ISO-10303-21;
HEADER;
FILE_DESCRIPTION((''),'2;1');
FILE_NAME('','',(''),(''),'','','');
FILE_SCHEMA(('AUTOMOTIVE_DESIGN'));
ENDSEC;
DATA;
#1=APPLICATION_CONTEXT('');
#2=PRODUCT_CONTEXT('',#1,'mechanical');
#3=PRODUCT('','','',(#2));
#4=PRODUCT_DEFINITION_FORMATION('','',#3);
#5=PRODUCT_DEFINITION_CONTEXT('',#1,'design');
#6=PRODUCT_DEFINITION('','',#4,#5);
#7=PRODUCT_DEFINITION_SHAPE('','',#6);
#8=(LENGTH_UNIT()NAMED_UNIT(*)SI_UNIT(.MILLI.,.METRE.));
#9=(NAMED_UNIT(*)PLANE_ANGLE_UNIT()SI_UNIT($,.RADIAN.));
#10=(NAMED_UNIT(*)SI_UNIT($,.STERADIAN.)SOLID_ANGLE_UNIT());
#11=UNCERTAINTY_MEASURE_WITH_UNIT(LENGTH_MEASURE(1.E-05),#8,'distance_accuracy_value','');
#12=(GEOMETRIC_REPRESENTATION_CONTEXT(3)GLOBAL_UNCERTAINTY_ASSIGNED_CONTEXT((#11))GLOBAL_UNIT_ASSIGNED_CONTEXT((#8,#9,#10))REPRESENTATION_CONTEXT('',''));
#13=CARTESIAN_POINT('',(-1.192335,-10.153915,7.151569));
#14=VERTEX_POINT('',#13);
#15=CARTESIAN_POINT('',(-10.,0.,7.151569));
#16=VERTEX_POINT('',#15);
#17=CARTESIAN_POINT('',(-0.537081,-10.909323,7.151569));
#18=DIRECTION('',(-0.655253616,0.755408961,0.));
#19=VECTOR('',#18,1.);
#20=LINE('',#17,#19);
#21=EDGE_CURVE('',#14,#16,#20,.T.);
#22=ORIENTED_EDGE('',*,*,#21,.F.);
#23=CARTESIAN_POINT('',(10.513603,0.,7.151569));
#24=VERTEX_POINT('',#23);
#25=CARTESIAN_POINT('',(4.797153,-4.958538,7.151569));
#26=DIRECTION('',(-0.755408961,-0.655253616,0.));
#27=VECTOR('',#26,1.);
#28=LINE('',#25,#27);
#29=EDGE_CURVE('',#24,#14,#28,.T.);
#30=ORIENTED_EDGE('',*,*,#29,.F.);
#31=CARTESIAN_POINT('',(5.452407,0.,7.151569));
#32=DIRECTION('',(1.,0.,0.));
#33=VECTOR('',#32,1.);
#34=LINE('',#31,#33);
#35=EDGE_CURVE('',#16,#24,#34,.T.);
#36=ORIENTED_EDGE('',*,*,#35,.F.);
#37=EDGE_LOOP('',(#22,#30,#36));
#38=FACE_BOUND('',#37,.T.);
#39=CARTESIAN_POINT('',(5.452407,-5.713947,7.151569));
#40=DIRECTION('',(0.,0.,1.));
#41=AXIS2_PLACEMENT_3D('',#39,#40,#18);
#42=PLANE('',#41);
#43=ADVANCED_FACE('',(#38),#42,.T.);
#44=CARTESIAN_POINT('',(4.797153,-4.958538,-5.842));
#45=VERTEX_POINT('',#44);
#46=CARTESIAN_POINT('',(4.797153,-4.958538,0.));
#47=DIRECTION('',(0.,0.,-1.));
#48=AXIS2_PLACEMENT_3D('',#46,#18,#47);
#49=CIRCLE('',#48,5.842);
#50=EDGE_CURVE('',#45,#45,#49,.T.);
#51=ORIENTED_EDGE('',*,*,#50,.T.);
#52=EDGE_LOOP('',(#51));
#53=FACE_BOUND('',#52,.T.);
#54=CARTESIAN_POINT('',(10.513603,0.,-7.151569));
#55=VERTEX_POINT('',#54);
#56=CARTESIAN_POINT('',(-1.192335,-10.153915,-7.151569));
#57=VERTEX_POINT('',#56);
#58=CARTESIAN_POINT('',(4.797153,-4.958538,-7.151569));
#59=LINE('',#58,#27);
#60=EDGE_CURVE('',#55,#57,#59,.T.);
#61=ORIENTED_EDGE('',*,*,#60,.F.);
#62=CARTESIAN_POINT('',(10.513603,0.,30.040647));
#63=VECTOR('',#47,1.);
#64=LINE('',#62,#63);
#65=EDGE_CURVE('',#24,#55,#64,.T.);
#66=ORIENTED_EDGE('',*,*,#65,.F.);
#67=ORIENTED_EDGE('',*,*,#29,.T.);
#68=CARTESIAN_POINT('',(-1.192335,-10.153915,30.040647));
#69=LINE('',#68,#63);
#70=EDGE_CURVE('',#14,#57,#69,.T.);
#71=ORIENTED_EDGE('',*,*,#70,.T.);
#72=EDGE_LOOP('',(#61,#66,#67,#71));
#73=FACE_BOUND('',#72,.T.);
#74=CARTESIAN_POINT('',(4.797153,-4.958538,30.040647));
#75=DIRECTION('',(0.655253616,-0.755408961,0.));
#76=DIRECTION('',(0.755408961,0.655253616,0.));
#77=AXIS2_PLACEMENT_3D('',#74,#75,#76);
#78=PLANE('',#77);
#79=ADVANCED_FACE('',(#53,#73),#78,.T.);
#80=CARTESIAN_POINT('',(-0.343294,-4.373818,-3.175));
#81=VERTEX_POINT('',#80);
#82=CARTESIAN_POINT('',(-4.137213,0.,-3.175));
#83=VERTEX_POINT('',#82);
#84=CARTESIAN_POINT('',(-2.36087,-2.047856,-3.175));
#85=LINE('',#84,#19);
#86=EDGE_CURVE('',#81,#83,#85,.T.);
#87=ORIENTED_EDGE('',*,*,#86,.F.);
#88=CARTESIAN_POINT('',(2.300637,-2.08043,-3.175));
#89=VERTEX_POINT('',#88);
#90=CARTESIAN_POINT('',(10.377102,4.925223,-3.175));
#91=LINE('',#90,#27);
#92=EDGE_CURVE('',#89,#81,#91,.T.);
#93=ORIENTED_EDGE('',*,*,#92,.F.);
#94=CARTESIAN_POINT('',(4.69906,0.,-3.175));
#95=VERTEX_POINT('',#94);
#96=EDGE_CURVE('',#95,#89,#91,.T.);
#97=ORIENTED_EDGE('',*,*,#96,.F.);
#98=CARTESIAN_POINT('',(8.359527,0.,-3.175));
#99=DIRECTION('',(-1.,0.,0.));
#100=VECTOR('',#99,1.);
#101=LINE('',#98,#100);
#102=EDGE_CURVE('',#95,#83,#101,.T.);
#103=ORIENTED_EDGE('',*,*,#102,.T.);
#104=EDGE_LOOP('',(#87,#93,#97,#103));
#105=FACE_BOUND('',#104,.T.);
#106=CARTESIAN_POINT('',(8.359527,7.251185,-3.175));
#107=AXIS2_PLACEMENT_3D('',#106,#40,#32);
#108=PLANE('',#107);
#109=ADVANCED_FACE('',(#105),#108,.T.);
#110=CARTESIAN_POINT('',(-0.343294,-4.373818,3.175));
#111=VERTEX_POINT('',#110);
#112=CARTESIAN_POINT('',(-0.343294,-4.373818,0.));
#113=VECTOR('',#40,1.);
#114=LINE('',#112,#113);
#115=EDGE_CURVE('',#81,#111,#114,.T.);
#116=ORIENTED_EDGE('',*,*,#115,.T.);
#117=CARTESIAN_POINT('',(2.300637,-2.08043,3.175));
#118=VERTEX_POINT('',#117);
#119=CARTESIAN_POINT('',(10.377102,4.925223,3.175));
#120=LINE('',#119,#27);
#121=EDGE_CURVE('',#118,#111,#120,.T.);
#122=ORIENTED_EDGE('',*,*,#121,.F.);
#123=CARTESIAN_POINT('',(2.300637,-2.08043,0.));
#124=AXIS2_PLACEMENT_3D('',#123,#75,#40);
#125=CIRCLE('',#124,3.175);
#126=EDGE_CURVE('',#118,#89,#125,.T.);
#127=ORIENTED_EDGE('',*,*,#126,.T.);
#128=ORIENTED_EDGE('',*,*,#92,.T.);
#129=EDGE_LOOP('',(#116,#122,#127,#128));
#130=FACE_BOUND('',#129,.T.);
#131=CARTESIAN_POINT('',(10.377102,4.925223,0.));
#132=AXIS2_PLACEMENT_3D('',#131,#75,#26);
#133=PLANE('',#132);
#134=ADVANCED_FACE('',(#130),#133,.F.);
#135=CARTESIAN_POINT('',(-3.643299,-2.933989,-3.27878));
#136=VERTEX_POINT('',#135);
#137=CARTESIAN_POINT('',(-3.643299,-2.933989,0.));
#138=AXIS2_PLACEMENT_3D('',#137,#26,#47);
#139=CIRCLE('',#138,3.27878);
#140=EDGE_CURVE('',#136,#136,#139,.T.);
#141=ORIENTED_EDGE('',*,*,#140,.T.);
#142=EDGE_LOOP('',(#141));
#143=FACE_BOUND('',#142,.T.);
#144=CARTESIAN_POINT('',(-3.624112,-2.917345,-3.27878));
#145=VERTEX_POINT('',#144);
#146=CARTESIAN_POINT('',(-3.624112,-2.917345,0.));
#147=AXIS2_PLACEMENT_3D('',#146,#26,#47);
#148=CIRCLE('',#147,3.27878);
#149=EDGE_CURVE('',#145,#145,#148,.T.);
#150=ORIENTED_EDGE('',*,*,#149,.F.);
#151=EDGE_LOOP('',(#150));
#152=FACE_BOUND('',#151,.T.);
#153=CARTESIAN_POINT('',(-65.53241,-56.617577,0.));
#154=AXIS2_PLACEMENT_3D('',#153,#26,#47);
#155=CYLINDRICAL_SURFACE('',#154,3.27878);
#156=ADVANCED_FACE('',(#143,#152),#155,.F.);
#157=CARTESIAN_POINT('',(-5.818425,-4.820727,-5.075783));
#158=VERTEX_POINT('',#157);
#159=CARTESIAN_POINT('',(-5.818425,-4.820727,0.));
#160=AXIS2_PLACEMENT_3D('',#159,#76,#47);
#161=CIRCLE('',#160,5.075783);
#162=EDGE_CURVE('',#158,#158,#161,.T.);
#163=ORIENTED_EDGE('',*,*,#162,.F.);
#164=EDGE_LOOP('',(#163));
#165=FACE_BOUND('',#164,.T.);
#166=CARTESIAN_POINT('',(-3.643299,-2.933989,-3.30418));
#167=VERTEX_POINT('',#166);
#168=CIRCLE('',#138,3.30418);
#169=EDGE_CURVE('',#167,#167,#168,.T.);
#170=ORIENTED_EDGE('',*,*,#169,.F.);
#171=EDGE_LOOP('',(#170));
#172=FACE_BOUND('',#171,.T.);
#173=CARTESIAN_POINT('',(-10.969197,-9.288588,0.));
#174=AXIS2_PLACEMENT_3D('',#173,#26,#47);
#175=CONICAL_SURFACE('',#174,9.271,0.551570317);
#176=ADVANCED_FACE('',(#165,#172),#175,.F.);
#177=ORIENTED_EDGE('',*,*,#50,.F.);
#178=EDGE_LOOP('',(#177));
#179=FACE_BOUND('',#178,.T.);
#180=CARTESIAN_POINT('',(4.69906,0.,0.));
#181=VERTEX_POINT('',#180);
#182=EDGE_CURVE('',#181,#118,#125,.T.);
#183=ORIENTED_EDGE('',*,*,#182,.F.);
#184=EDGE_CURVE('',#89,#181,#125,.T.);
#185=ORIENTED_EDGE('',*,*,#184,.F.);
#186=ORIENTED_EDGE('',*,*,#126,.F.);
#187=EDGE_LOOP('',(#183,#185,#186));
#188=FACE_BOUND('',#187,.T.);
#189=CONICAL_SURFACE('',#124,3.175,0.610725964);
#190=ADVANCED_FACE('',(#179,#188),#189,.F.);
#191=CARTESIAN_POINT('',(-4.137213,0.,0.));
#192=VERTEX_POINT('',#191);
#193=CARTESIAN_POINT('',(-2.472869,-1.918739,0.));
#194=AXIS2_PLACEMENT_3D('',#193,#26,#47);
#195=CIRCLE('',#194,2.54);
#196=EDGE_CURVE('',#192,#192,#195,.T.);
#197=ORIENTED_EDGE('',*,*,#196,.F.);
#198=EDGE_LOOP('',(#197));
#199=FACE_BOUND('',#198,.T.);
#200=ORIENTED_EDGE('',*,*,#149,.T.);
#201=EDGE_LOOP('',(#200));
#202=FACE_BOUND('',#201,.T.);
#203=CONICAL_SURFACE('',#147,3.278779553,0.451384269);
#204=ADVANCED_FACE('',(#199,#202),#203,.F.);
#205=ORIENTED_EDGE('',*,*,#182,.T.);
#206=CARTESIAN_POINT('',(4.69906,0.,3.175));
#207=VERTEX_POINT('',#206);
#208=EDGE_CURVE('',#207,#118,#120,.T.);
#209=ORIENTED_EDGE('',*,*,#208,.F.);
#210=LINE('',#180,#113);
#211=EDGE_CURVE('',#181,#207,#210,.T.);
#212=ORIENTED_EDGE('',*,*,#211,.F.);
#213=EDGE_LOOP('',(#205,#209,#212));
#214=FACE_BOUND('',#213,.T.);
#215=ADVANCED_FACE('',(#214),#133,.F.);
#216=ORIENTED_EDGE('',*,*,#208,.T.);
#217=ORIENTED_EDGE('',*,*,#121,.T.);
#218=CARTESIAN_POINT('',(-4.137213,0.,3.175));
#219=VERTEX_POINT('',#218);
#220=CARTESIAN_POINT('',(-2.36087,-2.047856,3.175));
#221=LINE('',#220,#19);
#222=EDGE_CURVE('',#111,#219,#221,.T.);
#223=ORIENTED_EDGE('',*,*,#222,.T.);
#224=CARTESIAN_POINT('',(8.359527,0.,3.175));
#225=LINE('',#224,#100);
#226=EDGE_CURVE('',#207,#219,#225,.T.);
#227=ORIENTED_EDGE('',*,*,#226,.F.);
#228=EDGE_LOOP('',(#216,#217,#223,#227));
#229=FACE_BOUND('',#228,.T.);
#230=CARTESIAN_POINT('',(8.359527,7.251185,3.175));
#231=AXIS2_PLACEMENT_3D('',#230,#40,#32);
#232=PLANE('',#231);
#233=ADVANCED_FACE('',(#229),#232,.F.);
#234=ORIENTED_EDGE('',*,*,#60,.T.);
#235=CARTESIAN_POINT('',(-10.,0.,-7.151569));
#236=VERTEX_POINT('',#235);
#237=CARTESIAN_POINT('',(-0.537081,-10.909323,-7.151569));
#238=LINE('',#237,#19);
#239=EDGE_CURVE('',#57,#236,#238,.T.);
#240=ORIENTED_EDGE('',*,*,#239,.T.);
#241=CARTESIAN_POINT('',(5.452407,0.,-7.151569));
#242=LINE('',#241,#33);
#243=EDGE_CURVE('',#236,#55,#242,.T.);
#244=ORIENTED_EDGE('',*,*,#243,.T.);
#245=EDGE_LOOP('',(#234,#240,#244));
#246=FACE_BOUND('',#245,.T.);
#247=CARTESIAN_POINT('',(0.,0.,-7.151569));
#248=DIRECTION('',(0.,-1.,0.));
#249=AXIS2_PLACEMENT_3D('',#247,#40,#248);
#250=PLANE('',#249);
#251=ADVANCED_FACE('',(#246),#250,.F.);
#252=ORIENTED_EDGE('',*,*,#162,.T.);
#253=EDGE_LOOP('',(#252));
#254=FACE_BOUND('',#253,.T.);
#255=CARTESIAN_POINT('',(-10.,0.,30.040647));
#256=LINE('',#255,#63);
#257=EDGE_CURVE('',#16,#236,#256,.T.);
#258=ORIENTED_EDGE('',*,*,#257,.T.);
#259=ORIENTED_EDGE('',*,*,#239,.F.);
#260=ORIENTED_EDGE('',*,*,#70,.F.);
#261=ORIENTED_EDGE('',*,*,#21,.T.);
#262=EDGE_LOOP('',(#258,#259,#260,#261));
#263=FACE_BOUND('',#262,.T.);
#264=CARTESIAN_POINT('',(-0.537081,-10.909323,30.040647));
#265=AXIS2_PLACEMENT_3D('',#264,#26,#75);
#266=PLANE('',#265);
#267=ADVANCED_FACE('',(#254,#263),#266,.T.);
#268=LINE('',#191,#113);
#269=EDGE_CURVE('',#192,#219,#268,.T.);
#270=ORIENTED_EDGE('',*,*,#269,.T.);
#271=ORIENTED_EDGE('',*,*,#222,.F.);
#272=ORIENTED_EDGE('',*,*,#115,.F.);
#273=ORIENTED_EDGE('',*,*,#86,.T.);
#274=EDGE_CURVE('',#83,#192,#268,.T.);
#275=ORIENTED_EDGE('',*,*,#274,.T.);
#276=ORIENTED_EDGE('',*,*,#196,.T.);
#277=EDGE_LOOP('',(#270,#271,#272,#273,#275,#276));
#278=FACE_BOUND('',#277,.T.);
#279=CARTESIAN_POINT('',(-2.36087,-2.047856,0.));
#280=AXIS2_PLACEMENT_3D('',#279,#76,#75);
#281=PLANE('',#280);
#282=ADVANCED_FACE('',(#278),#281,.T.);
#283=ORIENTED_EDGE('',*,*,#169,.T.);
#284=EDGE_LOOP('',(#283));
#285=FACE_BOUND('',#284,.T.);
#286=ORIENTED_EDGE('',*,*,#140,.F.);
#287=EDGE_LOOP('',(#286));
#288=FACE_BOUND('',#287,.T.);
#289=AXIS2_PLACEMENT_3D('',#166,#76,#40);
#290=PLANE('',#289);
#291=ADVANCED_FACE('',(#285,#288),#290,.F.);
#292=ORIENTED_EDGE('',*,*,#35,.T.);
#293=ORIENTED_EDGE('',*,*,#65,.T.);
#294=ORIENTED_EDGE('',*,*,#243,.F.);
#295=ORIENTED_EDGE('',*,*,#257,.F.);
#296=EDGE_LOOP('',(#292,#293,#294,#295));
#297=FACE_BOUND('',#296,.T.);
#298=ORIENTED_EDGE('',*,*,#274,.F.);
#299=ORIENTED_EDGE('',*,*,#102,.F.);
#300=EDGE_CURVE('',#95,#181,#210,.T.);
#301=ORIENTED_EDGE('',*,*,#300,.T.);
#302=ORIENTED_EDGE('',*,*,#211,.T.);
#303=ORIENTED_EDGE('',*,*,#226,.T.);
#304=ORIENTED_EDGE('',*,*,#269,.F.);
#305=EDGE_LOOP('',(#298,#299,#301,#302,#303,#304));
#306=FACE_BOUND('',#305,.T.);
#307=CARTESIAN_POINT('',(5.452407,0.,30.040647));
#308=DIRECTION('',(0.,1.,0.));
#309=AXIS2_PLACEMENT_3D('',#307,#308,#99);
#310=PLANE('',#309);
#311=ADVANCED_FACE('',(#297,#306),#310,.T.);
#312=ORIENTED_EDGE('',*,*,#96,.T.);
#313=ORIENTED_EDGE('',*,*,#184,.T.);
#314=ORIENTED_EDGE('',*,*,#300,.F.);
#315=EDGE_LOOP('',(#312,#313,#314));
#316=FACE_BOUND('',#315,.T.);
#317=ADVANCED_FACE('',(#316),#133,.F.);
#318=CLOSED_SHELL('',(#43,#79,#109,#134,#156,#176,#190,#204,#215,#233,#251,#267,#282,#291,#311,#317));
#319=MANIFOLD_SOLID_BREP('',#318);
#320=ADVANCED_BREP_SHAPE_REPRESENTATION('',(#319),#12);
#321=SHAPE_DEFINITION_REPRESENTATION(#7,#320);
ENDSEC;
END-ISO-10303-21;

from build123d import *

# Parameters (mm, degrees)
BOSS_EXTRUDE1_START = -7.151569
BOSS_EXTRUDE1_DEPTH = 14.303137569
CAVITY3_START       = -3.125287666
CAVITY3_DEPTH       = 9.3420001
CAVITY3_START_2     = -7.554089613
CAVITY3_2_OUTLINE_R = 3.278779553
CAVITY3_2_DEPTH     = 2.904801847
CAVITY3_START_3     = 0.374712334
CAVITY3_3_DEPTH     = 2.960969152
CAVITY3_START_4     = -3.175
CAVITY3_4_DEPTH     = 6.35


with BuildPart() as part:
    # Sketch1 → Boss-Extrude1 (new body)
    with BuildSketch(Plane.XY.offset(BOSS_EXTRUDE1_START)):
        Polygon((-10, 0), (10.513602901, 0), (-1.192334822, -10.153914519), align=None)
    extrude(amount=BOSS_EXTRUDE1_DEPTH)

    # Cavity3: read off the stored shape, not the designer's step
    # Cavity3 outline → Cavity3 (cut)
    with BuildSketch(Plane(origin=(0, 0, 0), x_dir=(0.6552536158947596, -0.7554089613294528, 0), z_dir=(0.7554089613294528, 0.6552536158947598, 0)).offset(CAVITY3_START)):
        with BuildLine():
            Line((3.079076317, -3.175), (3.079076317, 3.175))
            Line((3.079076317, 3.175), (-0.989318671, 3.175))
            ThreePointArc((-0.989318671, 3.175), (-3.449703236, 0), (-0.989318671, -3.175))
            Line((-0.989318671, -3.175), (3.079076317, -3.175))
        make_face()
    extrude(amount=CAVITY3_DEPTH, mode=Mode.SUBTRACT)

    # Cavity3 2 outline → Cavity3 2 (cut)
    with BuildSketch(Plane(origin=(0, 0, 0), x_dir=(0.6552536158947596, -0.7554089613294528, 0), z_dir=(0.7554089613294528, 0.6552536158947598, 0)).offset(CAVITY3_START_2)):
        with Locations((-0.170923683, 0)):
            Circle(CAVITY3_2_OUTLINE_R)
    extrude(amount=CAVITY3_2_DEPTH, mode=Mode.SUBTRACT)

    # Cavity3 3 outline → Cavity3 3 (cut)
    with BuildSketch(Plane(origin=(0, 0, 0), x_dir=(0.6552536158947596, -0.7554089613294528, 0), z_dir=(0.7554089613294528, 0.6552536158947598, 0)).offset(CAVITY3_START_3)):
        with BuildLine():
            Line((3.079076317, 0.433468981), (3.079076317, -0.433468981))
            ThreePointArc((3.079076317, -0.433468981), (3.10785587, 0), (3.079076317, 0.433468981))
        make_face()
    extrude(amount=CAVITY3_3_DEPTH, mode=Mode.SUBTRACT)

    # Cavity3 4 outline → Cavity3 4 (cut)
    with BuildSketch(Plane.XY.offset(CAVITY3_START_4)):
        Polygon((-0.343294419, -4.373817886), (4.699060398, 0), (-4.137212856, 0), align=None)
    extrude(amount=CAVITY3_4_DEPTH, mode=Mode.SUBTRACT)

    # Cavity3 5: loft between two sections, ruled curve by curve
    cavity3_5_from = [
        Edge.make_three_point_arc((2.300636945, -2.08043023, -3.175), (4.699060398, 0, 0), (2.300636945, -2.08043023, 3.175)),
        Edge.make_three_point_arc((2.300636945, -2.08043023, 3.175), (-0.097786507, -4.160860461, 0), (2.300636945, -2.08043023, -3.175)),
    ]
    cavity3_5_to = [
        Edge.make_three_point_arc((4.797153222, -4.958538373, -5.842), (9.210252374, -1.130546749, 0), (4.797153222, -4.958538373, 5.842)),
        Edge.make_three_point_arc((4.797153222, -4.958538373, 5.842), (0.38405407, -8.786529997, 0), (4.797153222, -4.958538373, -5.842)),
    ]
    cavity3_5 = Solid(Shell([*[Face.make_surface_from_curves(cavity3_5_from[k], cavity3_5_to[k]) for k in range(2)], Face(Wire(cavity3_5_from)), Face(Wire(cavity3_5_to))]))
    add(cavity3_5, mode=Mode.SUBTRACT)

    # Cavity3 6: loft between two sections, ruled curve by curve
    cavity3_6_from = [
        Edge.make_three_point_arc((-3.643299316, -2.933988714, -3.304179553), (-1.478223716, -5.429995558, 0), (-3.643299316, -2.933988714, 3.304179553)),
        Edge.make_three_point_arc((-3.643299316, -2.933988714, 3.304179553), (-5.808374915, -0.43798187, 0), (-3.643299316, -2.933988714, -3.304179553)),
    ]
    cavity3_6_to = [
        Edge.make_three_point_arc((-5.81842535, -4.820727252, -5.075783124), (-2.492500105, -8.655019309, 0), (-5.81842535, -4.820727252, 5.075783124)),
        Edge.make_three_point_arc((-5.81842535, -4.820727252, 5.075783124), (-9.144350595, -0.986435194, 0), (-5.81842535, -4.820727252, -5.075783124)),
    ]
    cavity3_6 = Solid(Shell([*[Face.make_surface_from_curves(cavity3_6_from[k], cavity3_6_to[k]) for k in range(2)], Face(Wire(cavity3_6_from)), Face(Wire(cavity3_6_to))]))
    add(cavity3_6, mode=Mode.SUBTRACT)

    # Cavity3 7: loft between two sections, ruled curve by curve
    cavity3_7_from = [
        Edge.make_three_point_arc((-2.472868671, -1.918738762, -2.54), (-0.808524487, -3.837477524, 0), (-2.472868671, -1.918738762, 2.54)),
        Edge.make_three_point_arc((-2.472868671, -1.918738762, 2.54), (-4.137212855, 0, 0), (-2.472868671, -1.918738762, -2.54)),
    ]
    cavity3_7_to = [
        Edge.make_three_point_arc((-3.624111928, -2.917345272, -3.278779553), (-1.47567977, -5.394164729, 0), (-3.624111928, -2.917345272, 3.278779553)),
        Edge.make_three_point_arc((-3.624111928, -2.917345272, 3.278779553), (-5.772544086, -0.440525816, 0), (-3.624111928, -2.917345272, -3.278779553)),
    ]
    cavity3_7 = Solid(Shell([*[Face.make_surface_from_curves(cavity3_7_from[k], cavity3_7_to[k]) for k in range(2)], Face(Wire(cavity3_7_from)), Face(Wire(cavity3_7_to))]))
    add(cavity3_7, mode=Mode.SUBTRACT)


solid = part.part
